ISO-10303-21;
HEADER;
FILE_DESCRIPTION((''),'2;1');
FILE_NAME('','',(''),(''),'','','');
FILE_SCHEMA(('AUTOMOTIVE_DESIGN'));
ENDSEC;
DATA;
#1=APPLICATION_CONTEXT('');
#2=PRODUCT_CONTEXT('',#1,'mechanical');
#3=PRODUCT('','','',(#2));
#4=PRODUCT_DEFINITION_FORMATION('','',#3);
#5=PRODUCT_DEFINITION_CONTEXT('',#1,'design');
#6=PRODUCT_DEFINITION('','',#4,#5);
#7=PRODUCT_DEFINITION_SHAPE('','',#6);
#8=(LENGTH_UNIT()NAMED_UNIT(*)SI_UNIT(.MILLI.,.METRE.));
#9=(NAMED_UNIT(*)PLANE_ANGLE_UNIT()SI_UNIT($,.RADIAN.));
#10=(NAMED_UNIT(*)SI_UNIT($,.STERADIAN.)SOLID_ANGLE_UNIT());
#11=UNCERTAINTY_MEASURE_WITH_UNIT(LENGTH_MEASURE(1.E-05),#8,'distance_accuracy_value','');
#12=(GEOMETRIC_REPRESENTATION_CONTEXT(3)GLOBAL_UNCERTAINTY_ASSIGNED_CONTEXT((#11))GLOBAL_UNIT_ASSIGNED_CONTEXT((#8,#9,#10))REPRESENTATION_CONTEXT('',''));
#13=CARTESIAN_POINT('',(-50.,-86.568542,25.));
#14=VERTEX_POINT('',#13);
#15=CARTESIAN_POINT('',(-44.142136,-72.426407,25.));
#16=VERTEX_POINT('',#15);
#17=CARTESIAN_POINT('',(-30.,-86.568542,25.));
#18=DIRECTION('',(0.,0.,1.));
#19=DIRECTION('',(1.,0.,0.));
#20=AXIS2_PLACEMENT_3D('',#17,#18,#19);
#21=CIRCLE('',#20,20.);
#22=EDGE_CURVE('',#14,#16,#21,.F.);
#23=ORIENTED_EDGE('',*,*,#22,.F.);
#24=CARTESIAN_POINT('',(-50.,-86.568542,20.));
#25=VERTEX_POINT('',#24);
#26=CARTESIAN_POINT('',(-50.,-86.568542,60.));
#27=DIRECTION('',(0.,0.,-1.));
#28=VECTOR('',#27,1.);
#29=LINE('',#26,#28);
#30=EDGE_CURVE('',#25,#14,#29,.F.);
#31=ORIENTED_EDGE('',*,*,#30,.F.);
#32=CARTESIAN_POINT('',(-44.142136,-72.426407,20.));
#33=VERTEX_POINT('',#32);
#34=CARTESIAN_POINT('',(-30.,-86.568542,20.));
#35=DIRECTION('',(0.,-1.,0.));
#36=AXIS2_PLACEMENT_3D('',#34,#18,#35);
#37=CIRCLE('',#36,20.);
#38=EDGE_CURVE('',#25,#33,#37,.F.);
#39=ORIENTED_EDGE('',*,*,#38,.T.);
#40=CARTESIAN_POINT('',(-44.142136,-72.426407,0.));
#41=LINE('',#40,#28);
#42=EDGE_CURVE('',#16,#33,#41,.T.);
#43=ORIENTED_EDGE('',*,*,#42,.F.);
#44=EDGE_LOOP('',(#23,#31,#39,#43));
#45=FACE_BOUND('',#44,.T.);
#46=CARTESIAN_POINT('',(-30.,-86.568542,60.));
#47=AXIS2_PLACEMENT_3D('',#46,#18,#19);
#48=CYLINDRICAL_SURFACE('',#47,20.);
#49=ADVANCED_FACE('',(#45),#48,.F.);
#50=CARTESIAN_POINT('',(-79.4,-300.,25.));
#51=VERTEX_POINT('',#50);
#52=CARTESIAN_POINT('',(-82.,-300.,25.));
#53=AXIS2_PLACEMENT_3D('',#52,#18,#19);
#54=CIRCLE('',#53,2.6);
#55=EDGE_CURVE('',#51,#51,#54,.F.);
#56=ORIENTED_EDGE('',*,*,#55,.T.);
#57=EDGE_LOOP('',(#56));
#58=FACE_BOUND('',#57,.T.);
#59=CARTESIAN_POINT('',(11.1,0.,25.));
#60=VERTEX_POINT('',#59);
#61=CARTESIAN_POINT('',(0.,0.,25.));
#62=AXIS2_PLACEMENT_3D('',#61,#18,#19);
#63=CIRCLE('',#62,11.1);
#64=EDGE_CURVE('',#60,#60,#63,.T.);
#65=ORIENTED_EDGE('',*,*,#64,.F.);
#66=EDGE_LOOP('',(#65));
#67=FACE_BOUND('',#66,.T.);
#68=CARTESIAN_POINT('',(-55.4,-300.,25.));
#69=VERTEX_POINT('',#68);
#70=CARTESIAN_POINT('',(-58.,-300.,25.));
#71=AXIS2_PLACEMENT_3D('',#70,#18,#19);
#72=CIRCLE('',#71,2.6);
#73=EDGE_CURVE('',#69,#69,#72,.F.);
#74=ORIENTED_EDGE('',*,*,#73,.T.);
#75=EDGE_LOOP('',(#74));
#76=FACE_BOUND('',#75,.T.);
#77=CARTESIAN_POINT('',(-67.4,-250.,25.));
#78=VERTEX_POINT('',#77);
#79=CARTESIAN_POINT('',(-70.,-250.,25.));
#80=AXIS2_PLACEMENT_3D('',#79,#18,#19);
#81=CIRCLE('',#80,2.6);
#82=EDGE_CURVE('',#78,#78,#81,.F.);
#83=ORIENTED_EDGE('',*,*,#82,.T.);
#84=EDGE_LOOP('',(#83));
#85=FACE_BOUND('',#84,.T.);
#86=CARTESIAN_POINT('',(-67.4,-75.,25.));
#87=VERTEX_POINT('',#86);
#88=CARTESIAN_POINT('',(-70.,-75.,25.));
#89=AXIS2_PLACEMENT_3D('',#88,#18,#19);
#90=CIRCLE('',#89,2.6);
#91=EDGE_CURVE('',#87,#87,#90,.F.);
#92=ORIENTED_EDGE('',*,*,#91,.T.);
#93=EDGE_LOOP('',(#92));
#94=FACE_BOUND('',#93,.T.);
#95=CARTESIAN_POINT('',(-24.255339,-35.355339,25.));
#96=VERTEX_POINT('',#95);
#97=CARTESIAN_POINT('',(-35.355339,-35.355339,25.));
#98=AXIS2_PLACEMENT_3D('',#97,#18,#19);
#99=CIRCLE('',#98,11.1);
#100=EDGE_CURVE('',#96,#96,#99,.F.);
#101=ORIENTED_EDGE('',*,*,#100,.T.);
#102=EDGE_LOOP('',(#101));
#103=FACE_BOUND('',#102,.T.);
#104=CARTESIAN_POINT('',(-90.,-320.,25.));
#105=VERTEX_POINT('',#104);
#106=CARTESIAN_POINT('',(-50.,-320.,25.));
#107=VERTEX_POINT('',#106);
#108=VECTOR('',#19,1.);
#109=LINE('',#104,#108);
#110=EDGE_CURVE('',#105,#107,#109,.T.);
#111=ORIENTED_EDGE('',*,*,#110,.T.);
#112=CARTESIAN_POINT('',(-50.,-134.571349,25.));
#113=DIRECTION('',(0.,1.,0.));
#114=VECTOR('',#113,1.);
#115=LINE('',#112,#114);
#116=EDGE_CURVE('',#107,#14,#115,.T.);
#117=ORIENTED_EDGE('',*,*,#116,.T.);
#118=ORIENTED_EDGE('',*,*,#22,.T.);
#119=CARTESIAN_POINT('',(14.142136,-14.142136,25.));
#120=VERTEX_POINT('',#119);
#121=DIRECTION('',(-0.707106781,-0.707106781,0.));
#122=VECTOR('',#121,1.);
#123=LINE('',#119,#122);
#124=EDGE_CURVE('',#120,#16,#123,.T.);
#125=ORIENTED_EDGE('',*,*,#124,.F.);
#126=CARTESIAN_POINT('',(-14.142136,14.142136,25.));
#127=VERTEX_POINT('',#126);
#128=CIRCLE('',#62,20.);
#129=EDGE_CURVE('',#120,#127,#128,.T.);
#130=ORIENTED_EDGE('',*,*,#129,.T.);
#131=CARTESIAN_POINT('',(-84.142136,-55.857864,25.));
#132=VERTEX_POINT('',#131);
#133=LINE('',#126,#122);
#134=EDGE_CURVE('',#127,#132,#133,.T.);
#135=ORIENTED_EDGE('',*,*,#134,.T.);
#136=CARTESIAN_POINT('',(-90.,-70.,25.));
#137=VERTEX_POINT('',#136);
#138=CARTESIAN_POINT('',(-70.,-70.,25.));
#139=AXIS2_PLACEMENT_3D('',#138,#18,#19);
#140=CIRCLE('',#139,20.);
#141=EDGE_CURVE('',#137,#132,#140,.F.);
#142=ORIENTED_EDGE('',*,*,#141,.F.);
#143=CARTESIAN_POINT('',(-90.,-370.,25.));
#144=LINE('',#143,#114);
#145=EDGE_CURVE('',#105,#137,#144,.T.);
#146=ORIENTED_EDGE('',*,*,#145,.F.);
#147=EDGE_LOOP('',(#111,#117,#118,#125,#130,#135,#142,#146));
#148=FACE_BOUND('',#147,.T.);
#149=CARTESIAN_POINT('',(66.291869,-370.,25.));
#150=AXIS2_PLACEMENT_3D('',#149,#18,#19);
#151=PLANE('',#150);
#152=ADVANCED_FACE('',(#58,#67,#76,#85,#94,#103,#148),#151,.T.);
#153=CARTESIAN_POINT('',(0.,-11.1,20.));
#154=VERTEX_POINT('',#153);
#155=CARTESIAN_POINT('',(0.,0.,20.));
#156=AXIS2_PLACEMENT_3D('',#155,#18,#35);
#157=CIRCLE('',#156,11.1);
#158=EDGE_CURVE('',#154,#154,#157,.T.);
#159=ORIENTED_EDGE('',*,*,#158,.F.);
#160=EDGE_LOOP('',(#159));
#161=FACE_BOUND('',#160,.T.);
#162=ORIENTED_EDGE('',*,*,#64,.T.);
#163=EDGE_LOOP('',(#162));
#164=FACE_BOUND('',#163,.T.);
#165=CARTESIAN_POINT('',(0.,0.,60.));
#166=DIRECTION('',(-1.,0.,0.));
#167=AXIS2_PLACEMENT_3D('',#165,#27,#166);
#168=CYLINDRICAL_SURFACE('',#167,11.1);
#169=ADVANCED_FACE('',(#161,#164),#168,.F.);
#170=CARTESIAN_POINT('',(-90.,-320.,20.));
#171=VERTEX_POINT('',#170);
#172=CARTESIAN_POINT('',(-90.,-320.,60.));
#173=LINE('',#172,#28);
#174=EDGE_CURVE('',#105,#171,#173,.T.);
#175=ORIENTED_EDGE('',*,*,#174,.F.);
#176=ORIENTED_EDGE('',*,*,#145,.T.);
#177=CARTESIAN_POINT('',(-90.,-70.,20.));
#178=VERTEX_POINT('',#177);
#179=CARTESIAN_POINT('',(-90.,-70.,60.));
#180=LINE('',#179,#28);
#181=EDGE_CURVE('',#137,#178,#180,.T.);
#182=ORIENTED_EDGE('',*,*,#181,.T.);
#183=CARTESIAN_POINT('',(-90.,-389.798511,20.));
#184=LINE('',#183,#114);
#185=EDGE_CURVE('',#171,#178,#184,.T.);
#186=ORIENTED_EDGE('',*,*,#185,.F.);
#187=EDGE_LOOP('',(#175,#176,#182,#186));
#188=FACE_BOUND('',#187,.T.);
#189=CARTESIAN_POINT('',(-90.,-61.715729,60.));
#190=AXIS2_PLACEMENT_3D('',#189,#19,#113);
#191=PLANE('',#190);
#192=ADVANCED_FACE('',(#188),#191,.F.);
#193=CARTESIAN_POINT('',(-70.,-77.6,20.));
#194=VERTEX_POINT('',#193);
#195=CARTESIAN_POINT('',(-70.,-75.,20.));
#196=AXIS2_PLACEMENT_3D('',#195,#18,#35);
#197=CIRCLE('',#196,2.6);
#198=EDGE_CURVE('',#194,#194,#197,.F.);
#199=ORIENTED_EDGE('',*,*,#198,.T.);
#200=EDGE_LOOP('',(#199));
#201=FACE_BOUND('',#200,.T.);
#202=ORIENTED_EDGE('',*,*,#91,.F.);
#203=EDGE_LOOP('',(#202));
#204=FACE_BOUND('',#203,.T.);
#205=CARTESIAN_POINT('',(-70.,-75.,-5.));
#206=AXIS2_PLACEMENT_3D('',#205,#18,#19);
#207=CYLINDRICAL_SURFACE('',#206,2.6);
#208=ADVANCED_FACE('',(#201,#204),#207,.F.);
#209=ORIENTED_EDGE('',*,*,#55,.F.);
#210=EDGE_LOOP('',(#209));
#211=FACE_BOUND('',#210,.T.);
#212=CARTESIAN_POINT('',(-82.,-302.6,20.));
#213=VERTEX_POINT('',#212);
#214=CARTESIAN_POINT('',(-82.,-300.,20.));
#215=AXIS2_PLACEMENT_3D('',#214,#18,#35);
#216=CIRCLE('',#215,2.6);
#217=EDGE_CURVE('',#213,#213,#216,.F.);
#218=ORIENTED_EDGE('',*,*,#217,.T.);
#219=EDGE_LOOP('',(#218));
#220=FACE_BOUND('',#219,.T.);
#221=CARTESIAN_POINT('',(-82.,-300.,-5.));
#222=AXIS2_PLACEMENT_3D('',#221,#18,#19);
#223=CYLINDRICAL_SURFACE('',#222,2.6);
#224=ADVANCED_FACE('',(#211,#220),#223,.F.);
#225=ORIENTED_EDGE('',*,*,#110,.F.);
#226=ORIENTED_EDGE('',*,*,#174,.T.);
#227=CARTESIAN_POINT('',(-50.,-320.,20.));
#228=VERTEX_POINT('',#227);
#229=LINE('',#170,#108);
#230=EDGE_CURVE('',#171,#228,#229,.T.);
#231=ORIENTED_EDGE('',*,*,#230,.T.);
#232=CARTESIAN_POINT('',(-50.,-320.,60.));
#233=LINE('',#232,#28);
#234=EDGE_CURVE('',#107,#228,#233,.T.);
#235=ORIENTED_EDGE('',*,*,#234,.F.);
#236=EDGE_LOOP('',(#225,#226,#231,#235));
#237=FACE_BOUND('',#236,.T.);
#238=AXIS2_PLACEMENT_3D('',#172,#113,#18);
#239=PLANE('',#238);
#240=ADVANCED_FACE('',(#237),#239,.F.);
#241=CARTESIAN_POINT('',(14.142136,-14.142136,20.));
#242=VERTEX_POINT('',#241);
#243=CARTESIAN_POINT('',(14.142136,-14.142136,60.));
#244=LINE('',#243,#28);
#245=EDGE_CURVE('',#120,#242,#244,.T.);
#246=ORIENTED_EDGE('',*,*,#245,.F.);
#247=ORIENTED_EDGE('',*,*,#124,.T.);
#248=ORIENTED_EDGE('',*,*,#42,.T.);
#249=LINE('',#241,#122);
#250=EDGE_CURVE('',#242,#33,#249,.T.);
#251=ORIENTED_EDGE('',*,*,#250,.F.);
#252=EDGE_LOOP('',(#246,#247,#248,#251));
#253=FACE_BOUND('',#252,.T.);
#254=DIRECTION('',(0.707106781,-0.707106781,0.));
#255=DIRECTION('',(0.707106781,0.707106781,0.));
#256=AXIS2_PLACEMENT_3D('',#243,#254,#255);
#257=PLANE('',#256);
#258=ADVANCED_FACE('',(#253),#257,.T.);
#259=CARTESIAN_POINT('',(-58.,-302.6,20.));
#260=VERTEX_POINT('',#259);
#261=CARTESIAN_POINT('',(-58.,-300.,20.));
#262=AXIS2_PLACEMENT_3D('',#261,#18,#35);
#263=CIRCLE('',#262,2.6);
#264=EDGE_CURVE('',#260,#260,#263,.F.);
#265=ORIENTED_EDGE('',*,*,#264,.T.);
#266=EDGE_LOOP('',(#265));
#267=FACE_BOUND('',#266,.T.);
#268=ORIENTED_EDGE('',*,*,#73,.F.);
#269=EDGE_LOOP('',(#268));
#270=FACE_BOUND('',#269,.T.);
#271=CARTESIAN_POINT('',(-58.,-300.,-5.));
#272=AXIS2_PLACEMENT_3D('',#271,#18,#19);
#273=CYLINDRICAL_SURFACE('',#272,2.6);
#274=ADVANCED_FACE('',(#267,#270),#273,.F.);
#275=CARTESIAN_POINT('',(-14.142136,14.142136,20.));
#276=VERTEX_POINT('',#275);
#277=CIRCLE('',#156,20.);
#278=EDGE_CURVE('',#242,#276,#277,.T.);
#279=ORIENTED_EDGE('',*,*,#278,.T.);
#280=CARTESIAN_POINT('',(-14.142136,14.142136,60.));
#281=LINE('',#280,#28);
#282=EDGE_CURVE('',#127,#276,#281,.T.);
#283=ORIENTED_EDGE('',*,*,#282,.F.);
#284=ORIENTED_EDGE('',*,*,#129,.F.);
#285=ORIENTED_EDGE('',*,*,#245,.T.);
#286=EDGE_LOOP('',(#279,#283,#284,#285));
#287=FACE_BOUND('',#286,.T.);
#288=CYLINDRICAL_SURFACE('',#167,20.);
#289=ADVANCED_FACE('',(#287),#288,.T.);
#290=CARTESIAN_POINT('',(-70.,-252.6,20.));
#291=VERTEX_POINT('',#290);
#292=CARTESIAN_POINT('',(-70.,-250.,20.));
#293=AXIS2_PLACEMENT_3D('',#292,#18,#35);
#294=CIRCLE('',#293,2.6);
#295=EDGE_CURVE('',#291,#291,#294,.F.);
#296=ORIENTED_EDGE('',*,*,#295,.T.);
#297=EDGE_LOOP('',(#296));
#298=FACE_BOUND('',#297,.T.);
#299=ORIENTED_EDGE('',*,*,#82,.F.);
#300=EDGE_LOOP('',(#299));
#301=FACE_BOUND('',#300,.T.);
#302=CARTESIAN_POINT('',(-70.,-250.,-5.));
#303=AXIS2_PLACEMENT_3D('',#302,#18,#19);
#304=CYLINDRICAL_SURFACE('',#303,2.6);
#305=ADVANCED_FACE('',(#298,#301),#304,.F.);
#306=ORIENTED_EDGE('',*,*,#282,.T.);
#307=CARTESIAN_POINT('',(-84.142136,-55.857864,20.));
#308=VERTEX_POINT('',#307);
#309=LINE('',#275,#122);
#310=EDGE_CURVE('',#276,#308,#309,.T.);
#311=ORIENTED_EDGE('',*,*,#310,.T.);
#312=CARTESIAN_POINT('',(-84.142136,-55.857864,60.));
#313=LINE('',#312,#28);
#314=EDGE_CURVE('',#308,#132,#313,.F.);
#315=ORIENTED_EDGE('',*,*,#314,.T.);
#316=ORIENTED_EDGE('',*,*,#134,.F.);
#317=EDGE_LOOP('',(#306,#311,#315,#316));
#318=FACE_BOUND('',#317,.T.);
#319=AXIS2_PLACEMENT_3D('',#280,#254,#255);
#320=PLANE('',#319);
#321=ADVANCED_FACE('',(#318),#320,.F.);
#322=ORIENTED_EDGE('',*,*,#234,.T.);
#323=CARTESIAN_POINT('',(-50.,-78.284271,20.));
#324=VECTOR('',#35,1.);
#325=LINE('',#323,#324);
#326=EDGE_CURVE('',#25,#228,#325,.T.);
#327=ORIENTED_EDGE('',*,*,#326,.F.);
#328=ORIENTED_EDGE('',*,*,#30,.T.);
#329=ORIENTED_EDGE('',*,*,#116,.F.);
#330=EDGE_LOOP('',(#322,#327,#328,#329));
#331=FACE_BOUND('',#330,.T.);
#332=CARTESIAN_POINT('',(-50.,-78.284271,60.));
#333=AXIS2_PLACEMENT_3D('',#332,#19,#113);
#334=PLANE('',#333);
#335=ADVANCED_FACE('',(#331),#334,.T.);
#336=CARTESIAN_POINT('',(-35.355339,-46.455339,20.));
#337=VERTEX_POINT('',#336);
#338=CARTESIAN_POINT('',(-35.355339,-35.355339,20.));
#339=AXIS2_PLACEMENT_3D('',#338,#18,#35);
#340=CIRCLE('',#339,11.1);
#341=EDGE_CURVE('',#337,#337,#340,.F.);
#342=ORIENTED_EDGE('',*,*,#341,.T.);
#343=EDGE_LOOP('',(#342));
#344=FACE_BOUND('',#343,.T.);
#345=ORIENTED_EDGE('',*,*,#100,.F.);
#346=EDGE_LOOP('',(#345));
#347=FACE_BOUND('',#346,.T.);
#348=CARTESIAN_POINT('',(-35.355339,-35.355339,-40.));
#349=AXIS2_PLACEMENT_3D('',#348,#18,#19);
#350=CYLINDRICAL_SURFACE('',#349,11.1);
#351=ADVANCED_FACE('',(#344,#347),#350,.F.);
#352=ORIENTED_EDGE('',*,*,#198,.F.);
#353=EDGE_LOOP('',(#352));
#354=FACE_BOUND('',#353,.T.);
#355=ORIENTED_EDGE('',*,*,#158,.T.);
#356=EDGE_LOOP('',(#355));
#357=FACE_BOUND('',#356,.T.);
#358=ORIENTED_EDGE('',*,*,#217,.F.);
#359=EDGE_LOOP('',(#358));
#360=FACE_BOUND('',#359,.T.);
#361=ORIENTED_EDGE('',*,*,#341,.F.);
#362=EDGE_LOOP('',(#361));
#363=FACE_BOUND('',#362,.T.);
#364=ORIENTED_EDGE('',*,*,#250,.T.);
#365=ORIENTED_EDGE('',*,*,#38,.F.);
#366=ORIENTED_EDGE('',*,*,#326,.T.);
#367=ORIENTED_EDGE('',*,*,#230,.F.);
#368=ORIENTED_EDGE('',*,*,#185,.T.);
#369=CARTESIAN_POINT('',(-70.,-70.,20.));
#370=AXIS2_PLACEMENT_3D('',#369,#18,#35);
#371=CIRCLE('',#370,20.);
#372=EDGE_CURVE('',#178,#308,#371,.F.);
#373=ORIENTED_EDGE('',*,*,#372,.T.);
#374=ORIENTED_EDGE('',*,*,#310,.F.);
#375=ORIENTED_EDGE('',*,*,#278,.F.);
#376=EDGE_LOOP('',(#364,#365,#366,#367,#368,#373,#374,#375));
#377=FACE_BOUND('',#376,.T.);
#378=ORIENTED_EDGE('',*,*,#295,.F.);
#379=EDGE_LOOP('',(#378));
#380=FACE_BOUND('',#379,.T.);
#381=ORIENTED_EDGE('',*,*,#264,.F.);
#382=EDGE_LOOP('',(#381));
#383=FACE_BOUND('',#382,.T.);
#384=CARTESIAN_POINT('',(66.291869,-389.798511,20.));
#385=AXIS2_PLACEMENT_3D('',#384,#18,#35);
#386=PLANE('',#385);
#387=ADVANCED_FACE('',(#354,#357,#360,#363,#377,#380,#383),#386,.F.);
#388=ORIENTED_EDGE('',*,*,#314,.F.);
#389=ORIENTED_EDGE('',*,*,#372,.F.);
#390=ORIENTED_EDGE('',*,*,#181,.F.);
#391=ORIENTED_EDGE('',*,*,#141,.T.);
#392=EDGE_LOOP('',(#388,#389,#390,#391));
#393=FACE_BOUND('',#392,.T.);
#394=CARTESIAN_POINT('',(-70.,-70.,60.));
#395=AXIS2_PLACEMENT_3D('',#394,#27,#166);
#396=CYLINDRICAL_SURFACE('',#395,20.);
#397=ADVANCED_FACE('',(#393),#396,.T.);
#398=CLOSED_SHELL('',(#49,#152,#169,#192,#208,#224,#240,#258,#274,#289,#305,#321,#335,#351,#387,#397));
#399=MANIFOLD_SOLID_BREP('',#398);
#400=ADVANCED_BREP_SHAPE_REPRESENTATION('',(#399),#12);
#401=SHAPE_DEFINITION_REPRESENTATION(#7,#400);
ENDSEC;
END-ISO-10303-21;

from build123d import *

# Parameters (mm, degrees)
SKETCH_1_R                = 20
SKETCH_1_R_2              = 11.1
EXTRUDE_1_DEPTH           = 60
EXTRUDE_2_DEPTH           = 30
SKETCH_4_R                = 11
EXTRUDE_3_DEPTH           = 5
SKETCH_8_R                = 11.1
CUT_EXTRUDE_1_DEPTH       = 100
FILLET_4_R                = 20
EXTRUDE_START             = -30
SKETCH_18_R               = 35
EXTRUDE_4_DEPTH           = 5
EXTRUDE_START_2           = -25
SKETCH_19_R               = 35
EXTRUDE_5_DEPTH           = 5
FILLET_5_R                = 10
CUT_EXTRUDE_9_DEPTH       = 388.169213652
CUT_EXTRUDE_9_DEPTH_BACK  = 388.169213652
SKETCH_21_R               = 2.6
CUT_EXTRUDE_10_DEPTH      = 407.881000043
CUT_EXTRUDE_10_DEPTH_BACK = 407.881000043
SKETCH_22_W               = 25
SKETCH_22_H               = 454.716430135
SKETCH_22_W_2             = 40
SKETCH_22_H_2             = 431.087956996


with BuildPart() as part:
    # 草图1 → 凸台-拉伸1 (new body)
    with BuildSketch(Plane.XY):
        Circle(SKETCH_1_R)
        Circle(SKETCH_1_R_2, mode=Mode.SUBTRACT)
    extrude(amount=EXTRUDE_1_DEPTH)

    # 草图2 → 凸台-拉伸2 (add, symmetric)
    with BuildSketch(Plane.XY.offset(30)):
        with BuildLine():
            Line((-14.142135624, 14.142135624), (-90, -61.715728753))
            Line((-90, -61.715728753), (-90, -320))
            Line((-90, -320), (-50, -320))
            Line((-50, -320), (-50, -78.284271247))
            Line((-50, -78.284271247), (14.142135624, -14.142135624))
            ThreePointArc((14.142135624, -14.142135624), (-14.142135624, -14.142135624), (-14.142135624, 14.142135624))
        make_face()
    extrude(amount=EXTRUDE_2_DEPTH, both=True)

    # 草图4 → 凸台-拉伸3 (add)
    with BuildSketch(Plane.XY.offset(60)):
        with BuildLine():
            Line((-90, -290), (-50, -290))
            Line((-50, -290), (-50, -350))
            ThreePointArc((-50, -350), (-70, -370), (-90, -350))
            Line((-90, -350), (-90, -290))
        make_face()
        with Locations((-70, -350)):
            Circle(SKETCH_4_R, mode=Mode.SUBTRACT)
    extrude_3 = extrude(amount=EXTRUDE_3_DEPTH)

    # 镜向1: 凸台-拉伸3 across plane
    add(extrude_3.mirror(Plane.XY.offset(30)))

    # 草图8 → 切除-拉伸1 (cut)
    with BuildSketch(Plane.XY.offset(60)):
        with Locations((-35.355339059, -35.355339059)):
            Circle(SKETCH_8_R)
    extrude(amount=-CUT_EXTRUDE_1_DEPTH, mode=Mode.SUBTRACT)

    # 圆角4
    fillet_4_edges = [part.edges().sort_by_distance(p)[0] for p in [
        (-50, -78.284271247, 30),
        (-90, -61.715728753, 30),
    ]]
    fillet(fillet_4_edges, radius=FILLET_4_R)

    # 草图18 → 凸台-拉伸4 (add)
    with BuildSketch(Plane.XY.offset(60).offset(EXTRUDE_START)):
        with BuildLine():
            ThreePointArc((15.487252676, -12.654841151), (14.833346688, -13.415357842), (14.142135624, -14.142135624))
            Line((14.142135624, -14.142135624), (-44.142135624, -72.426406871))
            ThreePointArc((-44.142135624, -72.426406871), (-48.47759065, -78.914873848), (-50, -86.568542495))
            Line((-50, -86.568542495), (-50, -128.513280962))
            Line((-50, -128.513280962), (20.291868618, -128.513280962))
            ThreePointArc((20.291868618, -128.513280962), (62.790327113, -100.116718851), (52.818780552, -49.986369028))
            Line((52.818780552, -49.986369028), (15.487252676, -12.654841151))
        make_face()
        with Locations((20.291868618, -82.513280962)):
            Circle(SKETCH_18_R, mode=Mode.SUBTRACT)
    extrude(amount=EXTRUDE_4_DEPTH)

    # 草图19 → 凸台-拉伸5 (add)
    with BuildSketch(Plane(origin=(0, 0, 0), x_dir=(-1, 0, 0), z_dir=(0, 0, -1)).offset(EXTRUDE_START_2)):
        with BuildLine():
            Line((50, -134.571348531), (50, -226.571348531))
            Line((50, -226.571348531), (-0.680255104, -226.571348531))
            ThreePointArc((-0.680255104, -226.571348531), (-46.680255104, -180.571348531), (-0.680255104, -134.571348531))
            Line((-0.680255104, -134.571348531), (50, -134.571348531))
        make_face()
        with Locations((-0.680255104, -180.571348531)):
            Circle(SKETCH_19_R, mode=Mode.SUBTRACT)
    extrude(amount=-EXTRUDE_5_DEPTH)

    # 圆角5
    # the kernel refuses this fillet: 10 mm, written as the material it adds along each edge
    with BuildSketch(Plane(origin=(-50, -226.571348531, 25), x_dir=(0, -1, 0), z_dir=(0, 0, 1)), Plane(origin=(-50, -128.513280962, 30), x_dir=(0, -1, 0), z_dir=(0, 0, 1))) as fillet_5_piece_1:
        with BuildLine():
            CenterArc((FILLET_5_R, FILLET_5_R), FILLET_5_R, 180, 90)
            Line((0, FILLET_5_R), (0, 0))
            Line((0, 0), (FILLET_5_R, 0))
        make_face()
    extrude(amount=5)

    # 草图21 → 切除-拉伸9 (cut, two sides: drawn at the far end of the back side and taken through both)
    with BuildSketch(Plane.XY.offset(65).offset(-CUT_EXTRUDE_9_DEPTH_BACK)):
        with Locations((-70, -75)):
            Circle(SKETCH_21_R)
        with Locations((-70, -250)):
            Circle(SKETCH_21_R)
        with Locations((-58, -300)):
            Circle(SKETCH_21_R)
        with Locations((-82, -300)):
            Circle(SKETCH_21_R)
    extrude(amount=CUT_EXTRUDE_9_DEPTH + CUT_EXTRUDE_9_DEPTH_BACK, mode=Mode.SUBTRACT)

    # 草图22 → 切除-拉伸10 (cut, two sides: drawn at the far end of the back side and taken through both)
    with BuildSketch(Plane.ZY.offset(90).offset(-CUT_EXTRUDE_10_DEPTH_BACK)):
        with Locations((7.5, -162.440295483)):
            Rectangle(SKETCH_22_W, SKETCH_22_H)
        with Locations((45, -154.456021502)):
            Rectangle(SKETCH_22_W_2, SKETCH_22_H_2)
    extrude(amount=CUT_EXTRUDE_10_DEPTH + CUT_EXTRUDE_10_DEPTH_BACK, mode=Mode.SUBTRACT)


solid = part.part
